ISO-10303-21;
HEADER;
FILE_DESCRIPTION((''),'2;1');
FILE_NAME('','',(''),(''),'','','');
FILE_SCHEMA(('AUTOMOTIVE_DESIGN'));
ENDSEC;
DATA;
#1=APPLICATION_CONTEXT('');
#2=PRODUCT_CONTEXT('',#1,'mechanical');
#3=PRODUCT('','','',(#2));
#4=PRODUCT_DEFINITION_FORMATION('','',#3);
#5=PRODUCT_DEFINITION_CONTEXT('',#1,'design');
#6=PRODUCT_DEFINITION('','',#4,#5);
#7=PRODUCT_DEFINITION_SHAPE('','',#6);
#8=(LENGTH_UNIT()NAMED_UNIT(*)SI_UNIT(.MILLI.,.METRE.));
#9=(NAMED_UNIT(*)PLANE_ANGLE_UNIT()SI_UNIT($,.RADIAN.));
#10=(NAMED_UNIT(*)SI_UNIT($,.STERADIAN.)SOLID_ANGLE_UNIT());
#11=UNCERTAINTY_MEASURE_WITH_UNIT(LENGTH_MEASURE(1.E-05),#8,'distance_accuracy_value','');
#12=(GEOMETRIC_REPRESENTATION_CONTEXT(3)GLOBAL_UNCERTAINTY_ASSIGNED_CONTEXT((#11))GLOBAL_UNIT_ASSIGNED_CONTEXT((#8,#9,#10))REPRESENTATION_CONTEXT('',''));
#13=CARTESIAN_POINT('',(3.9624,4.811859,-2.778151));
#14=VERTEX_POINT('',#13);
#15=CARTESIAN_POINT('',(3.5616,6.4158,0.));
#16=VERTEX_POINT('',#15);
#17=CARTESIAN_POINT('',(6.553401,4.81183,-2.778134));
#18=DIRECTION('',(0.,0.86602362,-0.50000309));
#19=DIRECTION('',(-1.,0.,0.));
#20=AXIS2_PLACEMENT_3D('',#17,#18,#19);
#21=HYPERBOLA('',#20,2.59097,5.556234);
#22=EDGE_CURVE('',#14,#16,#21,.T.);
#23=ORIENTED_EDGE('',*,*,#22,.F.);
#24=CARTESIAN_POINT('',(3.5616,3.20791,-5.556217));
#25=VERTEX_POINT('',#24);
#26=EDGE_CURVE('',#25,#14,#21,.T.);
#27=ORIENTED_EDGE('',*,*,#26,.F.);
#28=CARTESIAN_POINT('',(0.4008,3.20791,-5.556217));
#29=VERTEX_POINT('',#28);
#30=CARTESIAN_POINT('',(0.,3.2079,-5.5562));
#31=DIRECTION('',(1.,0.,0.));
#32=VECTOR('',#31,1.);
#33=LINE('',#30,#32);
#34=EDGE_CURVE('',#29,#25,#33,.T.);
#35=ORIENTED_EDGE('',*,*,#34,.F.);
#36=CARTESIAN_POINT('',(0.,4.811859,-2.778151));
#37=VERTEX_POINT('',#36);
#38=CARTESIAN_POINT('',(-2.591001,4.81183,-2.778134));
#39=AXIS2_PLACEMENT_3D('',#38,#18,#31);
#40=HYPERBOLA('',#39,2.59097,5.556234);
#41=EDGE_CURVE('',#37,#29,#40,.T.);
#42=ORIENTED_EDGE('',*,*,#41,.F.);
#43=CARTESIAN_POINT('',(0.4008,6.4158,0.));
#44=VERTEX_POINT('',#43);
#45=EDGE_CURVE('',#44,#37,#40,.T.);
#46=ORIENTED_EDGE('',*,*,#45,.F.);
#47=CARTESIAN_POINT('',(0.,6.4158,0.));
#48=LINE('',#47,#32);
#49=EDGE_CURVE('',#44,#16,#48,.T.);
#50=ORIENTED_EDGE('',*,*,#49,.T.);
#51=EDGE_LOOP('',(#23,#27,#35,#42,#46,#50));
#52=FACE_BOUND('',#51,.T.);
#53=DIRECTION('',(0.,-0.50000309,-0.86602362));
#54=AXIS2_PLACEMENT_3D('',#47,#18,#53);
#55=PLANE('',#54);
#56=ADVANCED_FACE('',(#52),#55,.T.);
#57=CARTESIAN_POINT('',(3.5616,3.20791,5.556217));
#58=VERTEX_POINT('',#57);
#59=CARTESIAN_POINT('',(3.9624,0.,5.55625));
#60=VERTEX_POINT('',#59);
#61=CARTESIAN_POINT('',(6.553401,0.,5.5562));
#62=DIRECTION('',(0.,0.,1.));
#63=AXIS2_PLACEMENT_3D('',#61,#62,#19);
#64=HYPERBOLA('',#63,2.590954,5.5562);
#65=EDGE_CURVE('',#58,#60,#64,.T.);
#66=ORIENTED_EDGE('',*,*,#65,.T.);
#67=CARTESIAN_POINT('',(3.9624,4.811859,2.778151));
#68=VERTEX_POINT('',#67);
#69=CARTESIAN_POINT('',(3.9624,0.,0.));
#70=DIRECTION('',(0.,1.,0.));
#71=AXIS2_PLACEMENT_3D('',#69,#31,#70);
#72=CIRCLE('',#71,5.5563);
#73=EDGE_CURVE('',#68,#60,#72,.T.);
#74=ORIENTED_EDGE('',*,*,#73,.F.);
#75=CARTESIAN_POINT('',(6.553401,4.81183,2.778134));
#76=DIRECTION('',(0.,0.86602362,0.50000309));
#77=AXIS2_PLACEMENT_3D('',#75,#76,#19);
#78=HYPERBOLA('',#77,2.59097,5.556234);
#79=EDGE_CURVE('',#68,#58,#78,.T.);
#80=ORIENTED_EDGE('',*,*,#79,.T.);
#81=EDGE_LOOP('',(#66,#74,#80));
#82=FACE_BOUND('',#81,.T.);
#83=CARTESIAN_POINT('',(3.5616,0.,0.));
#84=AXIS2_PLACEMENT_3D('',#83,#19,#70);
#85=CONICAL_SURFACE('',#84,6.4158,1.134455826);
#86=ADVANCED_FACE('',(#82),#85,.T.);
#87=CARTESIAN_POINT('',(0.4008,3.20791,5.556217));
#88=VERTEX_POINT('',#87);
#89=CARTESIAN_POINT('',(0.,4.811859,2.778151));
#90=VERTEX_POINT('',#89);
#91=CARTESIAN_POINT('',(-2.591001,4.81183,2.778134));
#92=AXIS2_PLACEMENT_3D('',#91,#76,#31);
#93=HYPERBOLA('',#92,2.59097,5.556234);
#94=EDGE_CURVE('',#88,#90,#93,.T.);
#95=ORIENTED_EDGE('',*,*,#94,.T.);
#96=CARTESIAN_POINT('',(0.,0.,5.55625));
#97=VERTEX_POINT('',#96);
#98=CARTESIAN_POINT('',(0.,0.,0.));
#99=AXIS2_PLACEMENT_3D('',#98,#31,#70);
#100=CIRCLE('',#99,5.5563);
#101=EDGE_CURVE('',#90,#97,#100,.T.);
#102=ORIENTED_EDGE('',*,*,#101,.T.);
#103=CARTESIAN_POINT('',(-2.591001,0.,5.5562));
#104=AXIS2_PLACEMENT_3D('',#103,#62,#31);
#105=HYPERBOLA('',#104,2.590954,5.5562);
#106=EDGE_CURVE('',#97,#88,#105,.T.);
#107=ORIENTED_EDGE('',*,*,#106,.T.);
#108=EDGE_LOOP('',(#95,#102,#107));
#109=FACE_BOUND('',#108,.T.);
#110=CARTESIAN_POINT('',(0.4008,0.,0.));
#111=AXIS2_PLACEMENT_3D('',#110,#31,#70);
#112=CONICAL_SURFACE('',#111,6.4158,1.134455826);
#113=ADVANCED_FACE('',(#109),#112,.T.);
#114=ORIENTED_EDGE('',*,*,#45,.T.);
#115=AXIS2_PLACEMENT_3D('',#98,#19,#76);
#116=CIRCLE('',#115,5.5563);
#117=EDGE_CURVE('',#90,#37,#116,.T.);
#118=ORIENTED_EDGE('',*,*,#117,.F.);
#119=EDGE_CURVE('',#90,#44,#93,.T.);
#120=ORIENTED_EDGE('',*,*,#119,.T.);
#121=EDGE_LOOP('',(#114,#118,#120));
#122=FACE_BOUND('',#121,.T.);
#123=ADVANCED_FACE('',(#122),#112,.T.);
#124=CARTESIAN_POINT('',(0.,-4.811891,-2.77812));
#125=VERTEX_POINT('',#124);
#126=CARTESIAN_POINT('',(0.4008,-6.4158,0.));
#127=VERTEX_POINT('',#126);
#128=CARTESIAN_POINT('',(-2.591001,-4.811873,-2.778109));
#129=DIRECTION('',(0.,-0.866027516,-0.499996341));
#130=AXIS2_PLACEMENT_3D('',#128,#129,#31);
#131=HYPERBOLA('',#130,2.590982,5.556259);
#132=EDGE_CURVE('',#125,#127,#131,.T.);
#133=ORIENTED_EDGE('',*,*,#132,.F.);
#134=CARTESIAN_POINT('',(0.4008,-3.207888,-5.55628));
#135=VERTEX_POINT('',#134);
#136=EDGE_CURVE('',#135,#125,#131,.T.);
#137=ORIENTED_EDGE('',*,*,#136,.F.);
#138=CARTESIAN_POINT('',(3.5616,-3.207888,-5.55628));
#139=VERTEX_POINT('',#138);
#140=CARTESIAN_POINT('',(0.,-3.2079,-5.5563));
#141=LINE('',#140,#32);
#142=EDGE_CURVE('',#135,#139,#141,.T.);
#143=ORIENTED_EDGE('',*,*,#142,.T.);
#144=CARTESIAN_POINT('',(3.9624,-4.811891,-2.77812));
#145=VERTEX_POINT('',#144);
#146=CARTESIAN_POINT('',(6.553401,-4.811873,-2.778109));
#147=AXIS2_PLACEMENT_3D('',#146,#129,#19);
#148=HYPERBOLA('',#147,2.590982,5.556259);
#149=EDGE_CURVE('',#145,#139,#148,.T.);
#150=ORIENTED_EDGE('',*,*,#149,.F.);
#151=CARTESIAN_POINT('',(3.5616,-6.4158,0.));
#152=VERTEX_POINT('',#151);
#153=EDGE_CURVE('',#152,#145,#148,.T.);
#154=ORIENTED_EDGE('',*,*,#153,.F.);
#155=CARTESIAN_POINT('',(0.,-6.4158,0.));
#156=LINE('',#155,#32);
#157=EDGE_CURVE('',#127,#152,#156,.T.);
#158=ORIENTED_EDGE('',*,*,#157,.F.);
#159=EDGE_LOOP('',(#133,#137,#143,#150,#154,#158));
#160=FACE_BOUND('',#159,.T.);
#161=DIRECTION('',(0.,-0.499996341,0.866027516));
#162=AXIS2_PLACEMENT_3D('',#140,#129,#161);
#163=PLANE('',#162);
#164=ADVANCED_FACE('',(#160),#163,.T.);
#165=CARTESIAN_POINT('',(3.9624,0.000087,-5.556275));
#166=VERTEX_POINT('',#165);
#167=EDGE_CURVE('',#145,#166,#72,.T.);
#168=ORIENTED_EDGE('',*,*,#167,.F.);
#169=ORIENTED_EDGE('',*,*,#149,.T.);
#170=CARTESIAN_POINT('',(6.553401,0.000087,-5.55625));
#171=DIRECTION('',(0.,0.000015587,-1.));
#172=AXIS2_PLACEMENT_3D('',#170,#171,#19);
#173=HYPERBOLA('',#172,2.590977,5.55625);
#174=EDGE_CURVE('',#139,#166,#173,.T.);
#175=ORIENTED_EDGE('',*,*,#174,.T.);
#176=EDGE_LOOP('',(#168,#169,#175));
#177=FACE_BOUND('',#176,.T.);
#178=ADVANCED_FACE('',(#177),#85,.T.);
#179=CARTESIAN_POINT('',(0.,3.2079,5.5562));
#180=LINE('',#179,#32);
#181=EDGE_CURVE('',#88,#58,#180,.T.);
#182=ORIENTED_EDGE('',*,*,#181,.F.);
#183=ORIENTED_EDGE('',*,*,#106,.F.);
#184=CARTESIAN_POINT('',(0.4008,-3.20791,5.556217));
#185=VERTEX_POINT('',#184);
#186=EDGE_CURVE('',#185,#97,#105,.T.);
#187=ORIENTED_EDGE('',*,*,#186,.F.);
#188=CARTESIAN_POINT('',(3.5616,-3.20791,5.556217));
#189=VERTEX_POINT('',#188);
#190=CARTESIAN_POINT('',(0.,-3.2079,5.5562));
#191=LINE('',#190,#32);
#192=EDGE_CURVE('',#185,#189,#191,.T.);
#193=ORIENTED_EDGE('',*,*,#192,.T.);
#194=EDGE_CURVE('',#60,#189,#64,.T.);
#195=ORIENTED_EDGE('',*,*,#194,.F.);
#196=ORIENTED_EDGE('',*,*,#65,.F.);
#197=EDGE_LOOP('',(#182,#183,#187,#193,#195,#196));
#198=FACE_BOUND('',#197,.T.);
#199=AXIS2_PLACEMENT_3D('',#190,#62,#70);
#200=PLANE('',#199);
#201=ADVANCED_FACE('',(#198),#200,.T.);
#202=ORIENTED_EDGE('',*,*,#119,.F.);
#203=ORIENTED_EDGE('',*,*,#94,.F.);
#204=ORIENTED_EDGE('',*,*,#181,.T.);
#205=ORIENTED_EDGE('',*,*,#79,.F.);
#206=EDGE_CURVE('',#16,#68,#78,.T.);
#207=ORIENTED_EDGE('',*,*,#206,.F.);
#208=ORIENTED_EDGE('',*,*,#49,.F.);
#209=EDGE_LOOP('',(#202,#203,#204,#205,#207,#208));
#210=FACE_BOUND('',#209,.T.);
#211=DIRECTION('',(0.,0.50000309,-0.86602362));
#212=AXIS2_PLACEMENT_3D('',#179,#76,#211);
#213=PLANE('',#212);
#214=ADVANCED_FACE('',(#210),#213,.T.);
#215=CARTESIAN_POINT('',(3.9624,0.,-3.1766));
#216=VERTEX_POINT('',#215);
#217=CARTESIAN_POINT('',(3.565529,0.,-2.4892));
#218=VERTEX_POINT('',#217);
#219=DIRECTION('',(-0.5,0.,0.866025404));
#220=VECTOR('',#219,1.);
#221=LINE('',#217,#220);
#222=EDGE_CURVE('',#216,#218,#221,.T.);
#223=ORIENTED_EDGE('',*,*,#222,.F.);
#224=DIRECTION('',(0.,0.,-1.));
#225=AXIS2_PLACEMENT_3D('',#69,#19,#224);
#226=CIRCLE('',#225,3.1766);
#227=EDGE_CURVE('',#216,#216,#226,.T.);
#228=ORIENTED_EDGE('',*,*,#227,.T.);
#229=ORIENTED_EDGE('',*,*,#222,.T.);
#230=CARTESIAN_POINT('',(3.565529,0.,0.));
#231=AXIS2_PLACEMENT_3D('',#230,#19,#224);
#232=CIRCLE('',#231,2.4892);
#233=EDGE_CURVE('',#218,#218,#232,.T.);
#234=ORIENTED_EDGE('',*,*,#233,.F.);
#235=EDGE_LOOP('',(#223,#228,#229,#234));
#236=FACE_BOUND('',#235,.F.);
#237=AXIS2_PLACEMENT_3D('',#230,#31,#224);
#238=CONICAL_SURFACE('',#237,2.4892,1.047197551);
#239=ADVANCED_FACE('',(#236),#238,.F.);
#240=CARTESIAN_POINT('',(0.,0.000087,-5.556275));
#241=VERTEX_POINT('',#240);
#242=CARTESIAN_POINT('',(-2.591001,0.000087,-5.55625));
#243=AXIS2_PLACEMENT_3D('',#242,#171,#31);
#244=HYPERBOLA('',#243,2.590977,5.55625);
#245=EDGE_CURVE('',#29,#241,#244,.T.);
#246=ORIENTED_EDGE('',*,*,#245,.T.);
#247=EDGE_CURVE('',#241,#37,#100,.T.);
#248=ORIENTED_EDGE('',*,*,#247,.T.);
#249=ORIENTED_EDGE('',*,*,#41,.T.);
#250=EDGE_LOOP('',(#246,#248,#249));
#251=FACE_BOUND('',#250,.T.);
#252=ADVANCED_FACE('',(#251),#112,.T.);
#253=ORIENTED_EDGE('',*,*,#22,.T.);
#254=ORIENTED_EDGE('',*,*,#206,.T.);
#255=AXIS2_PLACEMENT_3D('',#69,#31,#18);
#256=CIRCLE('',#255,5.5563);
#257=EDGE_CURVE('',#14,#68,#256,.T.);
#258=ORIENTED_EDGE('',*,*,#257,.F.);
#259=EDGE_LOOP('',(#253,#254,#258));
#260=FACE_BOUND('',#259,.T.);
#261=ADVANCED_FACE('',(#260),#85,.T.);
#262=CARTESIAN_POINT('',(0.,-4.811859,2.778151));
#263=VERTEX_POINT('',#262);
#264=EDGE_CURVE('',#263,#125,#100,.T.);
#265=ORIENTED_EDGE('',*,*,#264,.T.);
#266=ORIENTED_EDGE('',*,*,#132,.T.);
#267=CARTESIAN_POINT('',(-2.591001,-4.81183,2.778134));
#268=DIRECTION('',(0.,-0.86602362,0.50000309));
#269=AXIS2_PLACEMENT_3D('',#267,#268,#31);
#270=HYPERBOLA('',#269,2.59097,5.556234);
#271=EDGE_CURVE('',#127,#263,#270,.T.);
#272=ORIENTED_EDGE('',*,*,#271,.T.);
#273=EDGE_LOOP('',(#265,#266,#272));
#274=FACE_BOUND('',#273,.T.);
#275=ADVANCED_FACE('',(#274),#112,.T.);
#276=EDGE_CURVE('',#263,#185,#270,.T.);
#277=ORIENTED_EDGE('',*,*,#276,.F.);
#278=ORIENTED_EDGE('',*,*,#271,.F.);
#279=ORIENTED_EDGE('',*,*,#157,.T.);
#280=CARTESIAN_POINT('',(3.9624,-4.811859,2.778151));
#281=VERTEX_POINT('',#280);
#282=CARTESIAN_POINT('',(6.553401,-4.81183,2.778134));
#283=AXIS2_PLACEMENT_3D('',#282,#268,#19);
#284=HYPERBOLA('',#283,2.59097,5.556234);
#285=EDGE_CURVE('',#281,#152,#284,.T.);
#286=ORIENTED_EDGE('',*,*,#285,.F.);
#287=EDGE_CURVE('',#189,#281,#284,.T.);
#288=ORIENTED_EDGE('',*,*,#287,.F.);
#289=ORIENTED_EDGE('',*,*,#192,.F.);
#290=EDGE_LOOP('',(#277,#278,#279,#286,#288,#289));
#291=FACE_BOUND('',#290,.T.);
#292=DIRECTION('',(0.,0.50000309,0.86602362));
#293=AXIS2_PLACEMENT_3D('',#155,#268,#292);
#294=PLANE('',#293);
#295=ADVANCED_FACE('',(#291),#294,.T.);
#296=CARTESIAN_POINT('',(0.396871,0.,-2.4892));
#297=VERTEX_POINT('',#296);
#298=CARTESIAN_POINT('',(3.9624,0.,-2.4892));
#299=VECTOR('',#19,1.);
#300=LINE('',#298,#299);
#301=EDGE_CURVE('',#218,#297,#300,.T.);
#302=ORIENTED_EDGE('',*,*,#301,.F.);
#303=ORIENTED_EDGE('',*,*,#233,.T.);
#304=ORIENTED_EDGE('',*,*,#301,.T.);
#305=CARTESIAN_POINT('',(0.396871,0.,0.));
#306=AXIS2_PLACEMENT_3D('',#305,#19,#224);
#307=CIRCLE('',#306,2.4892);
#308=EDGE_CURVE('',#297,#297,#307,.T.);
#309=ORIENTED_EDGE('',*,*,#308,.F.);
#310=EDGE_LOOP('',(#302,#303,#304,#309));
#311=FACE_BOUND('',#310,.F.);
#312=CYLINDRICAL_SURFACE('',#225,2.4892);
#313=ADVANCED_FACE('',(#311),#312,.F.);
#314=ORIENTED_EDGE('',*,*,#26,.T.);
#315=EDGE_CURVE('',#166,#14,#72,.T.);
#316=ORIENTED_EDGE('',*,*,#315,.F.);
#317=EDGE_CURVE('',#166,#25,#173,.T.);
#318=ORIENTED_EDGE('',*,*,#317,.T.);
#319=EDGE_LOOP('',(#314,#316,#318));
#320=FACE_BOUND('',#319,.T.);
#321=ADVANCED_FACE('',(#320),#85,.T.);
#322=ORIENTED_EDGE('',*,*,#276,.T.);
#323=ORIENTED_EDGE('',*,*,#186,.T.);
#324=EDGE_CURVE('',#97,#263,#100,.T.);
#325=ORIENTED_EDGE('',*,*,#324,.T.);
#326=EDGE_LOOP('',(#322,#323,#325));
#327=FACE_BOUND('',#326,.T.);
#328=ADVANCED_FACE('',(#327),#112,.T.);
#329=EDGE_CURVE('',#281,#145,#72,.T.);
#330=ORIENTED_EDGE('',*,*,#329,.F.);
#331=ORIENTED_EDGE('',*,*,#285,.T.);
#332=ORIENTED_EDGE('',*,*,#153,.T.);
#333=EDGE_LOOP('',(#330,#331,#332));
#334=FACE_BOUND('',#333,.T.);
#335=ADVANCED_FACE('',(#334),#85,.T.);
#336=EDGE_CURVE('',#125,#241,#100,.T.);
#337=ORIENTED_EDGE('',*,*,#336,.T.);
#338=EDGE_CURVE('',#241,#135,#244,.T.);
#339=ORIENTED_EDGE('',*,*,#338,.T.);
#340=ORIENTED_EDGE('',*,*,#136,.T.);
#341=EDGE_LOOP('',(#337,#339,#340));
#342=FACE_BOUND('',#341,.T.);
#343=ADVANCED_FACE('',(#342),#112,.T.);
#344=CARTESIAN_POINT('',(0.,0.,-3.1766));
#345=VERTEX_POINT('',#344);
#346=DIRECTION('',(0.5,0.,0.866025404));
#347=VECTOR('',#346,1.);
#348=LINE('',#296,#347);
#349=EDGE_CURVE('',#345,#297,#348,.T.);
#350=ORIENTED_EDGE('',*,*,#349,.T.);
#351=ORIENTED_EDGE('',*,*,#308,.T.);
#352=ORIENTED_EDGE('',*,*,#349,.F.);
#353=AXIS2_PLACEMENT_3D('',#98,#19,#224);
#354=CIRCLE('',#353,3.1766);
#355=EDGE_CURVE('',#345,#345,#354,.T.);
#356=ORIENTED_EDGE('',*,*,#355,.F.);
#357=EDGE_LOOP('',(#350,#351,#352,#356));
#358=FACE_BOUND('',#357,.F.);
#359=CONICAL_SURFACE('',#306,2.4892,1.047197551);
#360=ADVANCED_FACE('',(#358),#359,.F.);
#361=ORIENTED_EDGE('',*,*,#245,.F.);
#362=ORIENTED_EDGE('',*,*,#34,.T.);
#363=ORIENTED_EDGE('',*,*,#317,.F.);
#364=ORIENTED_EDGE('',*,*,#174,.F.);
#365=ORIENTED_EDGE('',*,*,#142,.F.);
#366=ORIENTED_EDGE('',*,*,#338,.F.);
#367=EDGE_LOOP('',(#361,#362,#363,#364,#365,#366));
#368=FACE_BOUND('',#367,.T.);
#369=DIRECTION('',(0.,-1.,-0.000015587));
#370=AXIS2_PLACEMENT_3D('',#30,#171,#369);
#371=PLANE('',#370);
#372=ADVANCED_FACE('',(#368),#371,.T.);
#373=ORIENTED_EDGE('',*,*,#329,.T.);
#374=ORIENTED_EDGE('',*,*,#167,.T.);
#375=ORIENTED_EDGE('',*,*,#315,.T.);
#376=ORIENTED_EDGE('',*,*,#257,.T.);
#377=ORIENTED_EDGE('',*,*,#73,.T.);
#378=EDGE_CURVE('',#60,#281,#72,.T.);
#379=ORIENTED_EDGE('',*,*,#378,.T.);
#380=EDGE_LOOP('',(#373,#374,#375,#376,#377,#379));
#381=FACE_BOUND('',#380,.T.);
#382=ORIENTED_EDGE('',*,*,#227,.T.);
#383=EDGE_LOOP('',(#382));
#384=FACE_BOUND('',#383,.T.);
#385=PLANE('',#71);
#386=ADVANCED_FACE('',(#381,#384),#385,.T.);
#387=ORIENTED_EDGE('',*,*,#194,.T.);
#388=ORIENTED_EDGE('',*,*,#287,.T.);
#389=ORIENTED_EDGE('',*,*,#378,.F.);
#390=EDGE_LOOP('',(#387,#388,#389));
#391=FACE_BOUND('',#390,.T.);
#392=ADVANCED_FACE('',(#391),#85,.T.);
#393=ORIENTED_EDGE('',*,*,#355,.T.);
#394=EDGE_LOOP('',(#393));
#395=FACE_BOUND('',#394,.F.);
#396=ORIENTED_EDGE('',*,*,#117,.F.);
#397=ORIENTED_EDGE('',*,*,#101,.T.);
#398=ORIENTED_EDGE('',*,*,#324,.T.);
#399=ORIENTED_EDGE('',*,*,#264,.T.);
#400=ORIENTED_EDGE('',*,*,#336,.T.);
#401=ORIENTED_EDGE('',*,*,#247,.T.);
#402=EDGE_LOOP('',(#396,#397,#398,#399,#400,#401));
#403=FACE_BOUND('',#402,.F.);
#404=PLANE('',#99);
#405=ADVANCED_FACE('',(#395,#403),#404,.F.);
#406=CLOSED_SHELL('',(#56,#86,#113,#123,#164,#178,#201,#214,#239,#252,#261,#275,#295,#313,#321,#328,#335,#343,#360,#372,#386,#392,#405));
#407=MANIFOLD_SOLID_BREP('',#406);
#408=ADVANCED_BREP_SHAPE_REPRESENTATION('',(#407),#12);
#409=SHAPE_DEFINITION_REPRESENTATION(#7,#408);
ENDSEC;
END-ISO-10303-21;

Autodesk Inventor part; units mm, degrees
ref_plane "YZ Plane" through (0, 0, 0) normal (1, 0, 0) x (0, 1, 0)
ref_plane "XZ Plane" through (0, 0, 0) normal (0, 1, 0) x (-1, 0, 0)
sketch "Sketch1" plane through (0, 0, 0) normal (1, 0, 0) x (0, 1, 0)
  line L0 (-6.4158, 0) -> (-3.2079, 5.5562)
  line L1 (-3.2079, 5.5562) -> (3.2079, 5.5562)
  line L2 (3.2079, 5.5562) -> (6.4158, 0)
  line L3 (6.4158, 0) -> (3.2079, -5.5562)
  line L4 (3.2079, -5.5562) -> (-3.2079, -5.5563)
  line L5 (-3.2079, -5.5563) -> (-6.4158, 0)
  point P0 (0, 0)
  point P1 (0, 0)
  dimension "d0" = 12.8316
extrude "Body" add sketch "Sketch1" along normal blind 3.9624
sketch "Sketch2" plane through (0, 0, 0) normal (0, 0, 1) x (1, 0, 0)
  line L0 (0, 3.2079) -> (0, 6.4158) projected
  line L1 (0, 6.4158) -> (3.9624, 6.4158) projected
  line L2 (3.9624, 3.2079) -> (3.9624, 6.4158) projected
  line L3 (-0.7925, 0) -> (4.7549, 0) projected
  line L4 (0.4008, 6.4158) -> (0, 5.5563)
  line L5 (3.5616, 6.4158) -> (3.9624, 5.5563)
  dimension "d3" = 25
  dimension "d4" = 25
  dimension "d5" = 11.1125
  dimension "d6" = 11.1125
revolve "Chamfer1" cut sketch "Sketch2" angle 360 about axis through (-10, 0, 0) along (1, 0, 0)
sketch "Sketch3" plane through (3.9624, 0, 0) normal (1, 0, 0) x (0, 0, -1)
  arc A0 (-2.7781, -4.8119) -> (2.7781, -4.8119) centre (0, 0) ccw projected
hole "Thread" at (3.9624, 0, 0) direction (-1, 0, 0) diameter 4.9784 end through all thread size "1/4-20 UNC" class "2B" standard "ANSI Unified Screw Threads"
chamfer "Chamfer2" distance 0.6874 angle 30 1 edges at (3.9624, 0, 2.4892) measured on face at (3.9624, 4.5076, -0.1)
chamfer "Chamfer3" distance 0.6874 angle 30 1 edges at (0, 0, 2.4892) measured on face at (0, 4.5076, -0.1)
ref_plane "Work Plane1" through (-13.4686, 0, 0) normal (0, -0.8660254, -0.5) x (1, 0, 0)
equation "\"d0\" = 1.1547 * SW"
equation "\"d1\" = KOH"
equation "\"d3\" = ANG1"
equation "\"d4\" = ANG2"
equation "\"d5\" = SW0"
equation "\"d6\" = SW01"
equation "\"d8\" = -0.5 * GD1 + 0.5 * NND"
equation "\"d40\" = -0.5 * GD1 + 0.5 * NND"
equation "\"d10\" = -0.5 * GD1 + 0.5 * NND"
equation "\"d41\" = -0.5 * GD1 + 0.5 * NND"
equation "\"ANG1\" = 25deg"
equation "\"ANG2\" = 25deg"
equation "\"NND\" = 6.35"
equation "\"KOH\" = 3.9624"
equation "\"SW\" = 11.1125"
equation "\"SW0\" = SW"
equation "\"SW01\" = SW"
equation "\"THREADDIA\" = 6.35"
equation "\"TOA\" = 30deg"
equation "\"E0\" = 1.155 * SW"
equation "\"GD1\" = 4.975185"
properties part number "ANSI B18.2.2 - 1/4 - 20"
